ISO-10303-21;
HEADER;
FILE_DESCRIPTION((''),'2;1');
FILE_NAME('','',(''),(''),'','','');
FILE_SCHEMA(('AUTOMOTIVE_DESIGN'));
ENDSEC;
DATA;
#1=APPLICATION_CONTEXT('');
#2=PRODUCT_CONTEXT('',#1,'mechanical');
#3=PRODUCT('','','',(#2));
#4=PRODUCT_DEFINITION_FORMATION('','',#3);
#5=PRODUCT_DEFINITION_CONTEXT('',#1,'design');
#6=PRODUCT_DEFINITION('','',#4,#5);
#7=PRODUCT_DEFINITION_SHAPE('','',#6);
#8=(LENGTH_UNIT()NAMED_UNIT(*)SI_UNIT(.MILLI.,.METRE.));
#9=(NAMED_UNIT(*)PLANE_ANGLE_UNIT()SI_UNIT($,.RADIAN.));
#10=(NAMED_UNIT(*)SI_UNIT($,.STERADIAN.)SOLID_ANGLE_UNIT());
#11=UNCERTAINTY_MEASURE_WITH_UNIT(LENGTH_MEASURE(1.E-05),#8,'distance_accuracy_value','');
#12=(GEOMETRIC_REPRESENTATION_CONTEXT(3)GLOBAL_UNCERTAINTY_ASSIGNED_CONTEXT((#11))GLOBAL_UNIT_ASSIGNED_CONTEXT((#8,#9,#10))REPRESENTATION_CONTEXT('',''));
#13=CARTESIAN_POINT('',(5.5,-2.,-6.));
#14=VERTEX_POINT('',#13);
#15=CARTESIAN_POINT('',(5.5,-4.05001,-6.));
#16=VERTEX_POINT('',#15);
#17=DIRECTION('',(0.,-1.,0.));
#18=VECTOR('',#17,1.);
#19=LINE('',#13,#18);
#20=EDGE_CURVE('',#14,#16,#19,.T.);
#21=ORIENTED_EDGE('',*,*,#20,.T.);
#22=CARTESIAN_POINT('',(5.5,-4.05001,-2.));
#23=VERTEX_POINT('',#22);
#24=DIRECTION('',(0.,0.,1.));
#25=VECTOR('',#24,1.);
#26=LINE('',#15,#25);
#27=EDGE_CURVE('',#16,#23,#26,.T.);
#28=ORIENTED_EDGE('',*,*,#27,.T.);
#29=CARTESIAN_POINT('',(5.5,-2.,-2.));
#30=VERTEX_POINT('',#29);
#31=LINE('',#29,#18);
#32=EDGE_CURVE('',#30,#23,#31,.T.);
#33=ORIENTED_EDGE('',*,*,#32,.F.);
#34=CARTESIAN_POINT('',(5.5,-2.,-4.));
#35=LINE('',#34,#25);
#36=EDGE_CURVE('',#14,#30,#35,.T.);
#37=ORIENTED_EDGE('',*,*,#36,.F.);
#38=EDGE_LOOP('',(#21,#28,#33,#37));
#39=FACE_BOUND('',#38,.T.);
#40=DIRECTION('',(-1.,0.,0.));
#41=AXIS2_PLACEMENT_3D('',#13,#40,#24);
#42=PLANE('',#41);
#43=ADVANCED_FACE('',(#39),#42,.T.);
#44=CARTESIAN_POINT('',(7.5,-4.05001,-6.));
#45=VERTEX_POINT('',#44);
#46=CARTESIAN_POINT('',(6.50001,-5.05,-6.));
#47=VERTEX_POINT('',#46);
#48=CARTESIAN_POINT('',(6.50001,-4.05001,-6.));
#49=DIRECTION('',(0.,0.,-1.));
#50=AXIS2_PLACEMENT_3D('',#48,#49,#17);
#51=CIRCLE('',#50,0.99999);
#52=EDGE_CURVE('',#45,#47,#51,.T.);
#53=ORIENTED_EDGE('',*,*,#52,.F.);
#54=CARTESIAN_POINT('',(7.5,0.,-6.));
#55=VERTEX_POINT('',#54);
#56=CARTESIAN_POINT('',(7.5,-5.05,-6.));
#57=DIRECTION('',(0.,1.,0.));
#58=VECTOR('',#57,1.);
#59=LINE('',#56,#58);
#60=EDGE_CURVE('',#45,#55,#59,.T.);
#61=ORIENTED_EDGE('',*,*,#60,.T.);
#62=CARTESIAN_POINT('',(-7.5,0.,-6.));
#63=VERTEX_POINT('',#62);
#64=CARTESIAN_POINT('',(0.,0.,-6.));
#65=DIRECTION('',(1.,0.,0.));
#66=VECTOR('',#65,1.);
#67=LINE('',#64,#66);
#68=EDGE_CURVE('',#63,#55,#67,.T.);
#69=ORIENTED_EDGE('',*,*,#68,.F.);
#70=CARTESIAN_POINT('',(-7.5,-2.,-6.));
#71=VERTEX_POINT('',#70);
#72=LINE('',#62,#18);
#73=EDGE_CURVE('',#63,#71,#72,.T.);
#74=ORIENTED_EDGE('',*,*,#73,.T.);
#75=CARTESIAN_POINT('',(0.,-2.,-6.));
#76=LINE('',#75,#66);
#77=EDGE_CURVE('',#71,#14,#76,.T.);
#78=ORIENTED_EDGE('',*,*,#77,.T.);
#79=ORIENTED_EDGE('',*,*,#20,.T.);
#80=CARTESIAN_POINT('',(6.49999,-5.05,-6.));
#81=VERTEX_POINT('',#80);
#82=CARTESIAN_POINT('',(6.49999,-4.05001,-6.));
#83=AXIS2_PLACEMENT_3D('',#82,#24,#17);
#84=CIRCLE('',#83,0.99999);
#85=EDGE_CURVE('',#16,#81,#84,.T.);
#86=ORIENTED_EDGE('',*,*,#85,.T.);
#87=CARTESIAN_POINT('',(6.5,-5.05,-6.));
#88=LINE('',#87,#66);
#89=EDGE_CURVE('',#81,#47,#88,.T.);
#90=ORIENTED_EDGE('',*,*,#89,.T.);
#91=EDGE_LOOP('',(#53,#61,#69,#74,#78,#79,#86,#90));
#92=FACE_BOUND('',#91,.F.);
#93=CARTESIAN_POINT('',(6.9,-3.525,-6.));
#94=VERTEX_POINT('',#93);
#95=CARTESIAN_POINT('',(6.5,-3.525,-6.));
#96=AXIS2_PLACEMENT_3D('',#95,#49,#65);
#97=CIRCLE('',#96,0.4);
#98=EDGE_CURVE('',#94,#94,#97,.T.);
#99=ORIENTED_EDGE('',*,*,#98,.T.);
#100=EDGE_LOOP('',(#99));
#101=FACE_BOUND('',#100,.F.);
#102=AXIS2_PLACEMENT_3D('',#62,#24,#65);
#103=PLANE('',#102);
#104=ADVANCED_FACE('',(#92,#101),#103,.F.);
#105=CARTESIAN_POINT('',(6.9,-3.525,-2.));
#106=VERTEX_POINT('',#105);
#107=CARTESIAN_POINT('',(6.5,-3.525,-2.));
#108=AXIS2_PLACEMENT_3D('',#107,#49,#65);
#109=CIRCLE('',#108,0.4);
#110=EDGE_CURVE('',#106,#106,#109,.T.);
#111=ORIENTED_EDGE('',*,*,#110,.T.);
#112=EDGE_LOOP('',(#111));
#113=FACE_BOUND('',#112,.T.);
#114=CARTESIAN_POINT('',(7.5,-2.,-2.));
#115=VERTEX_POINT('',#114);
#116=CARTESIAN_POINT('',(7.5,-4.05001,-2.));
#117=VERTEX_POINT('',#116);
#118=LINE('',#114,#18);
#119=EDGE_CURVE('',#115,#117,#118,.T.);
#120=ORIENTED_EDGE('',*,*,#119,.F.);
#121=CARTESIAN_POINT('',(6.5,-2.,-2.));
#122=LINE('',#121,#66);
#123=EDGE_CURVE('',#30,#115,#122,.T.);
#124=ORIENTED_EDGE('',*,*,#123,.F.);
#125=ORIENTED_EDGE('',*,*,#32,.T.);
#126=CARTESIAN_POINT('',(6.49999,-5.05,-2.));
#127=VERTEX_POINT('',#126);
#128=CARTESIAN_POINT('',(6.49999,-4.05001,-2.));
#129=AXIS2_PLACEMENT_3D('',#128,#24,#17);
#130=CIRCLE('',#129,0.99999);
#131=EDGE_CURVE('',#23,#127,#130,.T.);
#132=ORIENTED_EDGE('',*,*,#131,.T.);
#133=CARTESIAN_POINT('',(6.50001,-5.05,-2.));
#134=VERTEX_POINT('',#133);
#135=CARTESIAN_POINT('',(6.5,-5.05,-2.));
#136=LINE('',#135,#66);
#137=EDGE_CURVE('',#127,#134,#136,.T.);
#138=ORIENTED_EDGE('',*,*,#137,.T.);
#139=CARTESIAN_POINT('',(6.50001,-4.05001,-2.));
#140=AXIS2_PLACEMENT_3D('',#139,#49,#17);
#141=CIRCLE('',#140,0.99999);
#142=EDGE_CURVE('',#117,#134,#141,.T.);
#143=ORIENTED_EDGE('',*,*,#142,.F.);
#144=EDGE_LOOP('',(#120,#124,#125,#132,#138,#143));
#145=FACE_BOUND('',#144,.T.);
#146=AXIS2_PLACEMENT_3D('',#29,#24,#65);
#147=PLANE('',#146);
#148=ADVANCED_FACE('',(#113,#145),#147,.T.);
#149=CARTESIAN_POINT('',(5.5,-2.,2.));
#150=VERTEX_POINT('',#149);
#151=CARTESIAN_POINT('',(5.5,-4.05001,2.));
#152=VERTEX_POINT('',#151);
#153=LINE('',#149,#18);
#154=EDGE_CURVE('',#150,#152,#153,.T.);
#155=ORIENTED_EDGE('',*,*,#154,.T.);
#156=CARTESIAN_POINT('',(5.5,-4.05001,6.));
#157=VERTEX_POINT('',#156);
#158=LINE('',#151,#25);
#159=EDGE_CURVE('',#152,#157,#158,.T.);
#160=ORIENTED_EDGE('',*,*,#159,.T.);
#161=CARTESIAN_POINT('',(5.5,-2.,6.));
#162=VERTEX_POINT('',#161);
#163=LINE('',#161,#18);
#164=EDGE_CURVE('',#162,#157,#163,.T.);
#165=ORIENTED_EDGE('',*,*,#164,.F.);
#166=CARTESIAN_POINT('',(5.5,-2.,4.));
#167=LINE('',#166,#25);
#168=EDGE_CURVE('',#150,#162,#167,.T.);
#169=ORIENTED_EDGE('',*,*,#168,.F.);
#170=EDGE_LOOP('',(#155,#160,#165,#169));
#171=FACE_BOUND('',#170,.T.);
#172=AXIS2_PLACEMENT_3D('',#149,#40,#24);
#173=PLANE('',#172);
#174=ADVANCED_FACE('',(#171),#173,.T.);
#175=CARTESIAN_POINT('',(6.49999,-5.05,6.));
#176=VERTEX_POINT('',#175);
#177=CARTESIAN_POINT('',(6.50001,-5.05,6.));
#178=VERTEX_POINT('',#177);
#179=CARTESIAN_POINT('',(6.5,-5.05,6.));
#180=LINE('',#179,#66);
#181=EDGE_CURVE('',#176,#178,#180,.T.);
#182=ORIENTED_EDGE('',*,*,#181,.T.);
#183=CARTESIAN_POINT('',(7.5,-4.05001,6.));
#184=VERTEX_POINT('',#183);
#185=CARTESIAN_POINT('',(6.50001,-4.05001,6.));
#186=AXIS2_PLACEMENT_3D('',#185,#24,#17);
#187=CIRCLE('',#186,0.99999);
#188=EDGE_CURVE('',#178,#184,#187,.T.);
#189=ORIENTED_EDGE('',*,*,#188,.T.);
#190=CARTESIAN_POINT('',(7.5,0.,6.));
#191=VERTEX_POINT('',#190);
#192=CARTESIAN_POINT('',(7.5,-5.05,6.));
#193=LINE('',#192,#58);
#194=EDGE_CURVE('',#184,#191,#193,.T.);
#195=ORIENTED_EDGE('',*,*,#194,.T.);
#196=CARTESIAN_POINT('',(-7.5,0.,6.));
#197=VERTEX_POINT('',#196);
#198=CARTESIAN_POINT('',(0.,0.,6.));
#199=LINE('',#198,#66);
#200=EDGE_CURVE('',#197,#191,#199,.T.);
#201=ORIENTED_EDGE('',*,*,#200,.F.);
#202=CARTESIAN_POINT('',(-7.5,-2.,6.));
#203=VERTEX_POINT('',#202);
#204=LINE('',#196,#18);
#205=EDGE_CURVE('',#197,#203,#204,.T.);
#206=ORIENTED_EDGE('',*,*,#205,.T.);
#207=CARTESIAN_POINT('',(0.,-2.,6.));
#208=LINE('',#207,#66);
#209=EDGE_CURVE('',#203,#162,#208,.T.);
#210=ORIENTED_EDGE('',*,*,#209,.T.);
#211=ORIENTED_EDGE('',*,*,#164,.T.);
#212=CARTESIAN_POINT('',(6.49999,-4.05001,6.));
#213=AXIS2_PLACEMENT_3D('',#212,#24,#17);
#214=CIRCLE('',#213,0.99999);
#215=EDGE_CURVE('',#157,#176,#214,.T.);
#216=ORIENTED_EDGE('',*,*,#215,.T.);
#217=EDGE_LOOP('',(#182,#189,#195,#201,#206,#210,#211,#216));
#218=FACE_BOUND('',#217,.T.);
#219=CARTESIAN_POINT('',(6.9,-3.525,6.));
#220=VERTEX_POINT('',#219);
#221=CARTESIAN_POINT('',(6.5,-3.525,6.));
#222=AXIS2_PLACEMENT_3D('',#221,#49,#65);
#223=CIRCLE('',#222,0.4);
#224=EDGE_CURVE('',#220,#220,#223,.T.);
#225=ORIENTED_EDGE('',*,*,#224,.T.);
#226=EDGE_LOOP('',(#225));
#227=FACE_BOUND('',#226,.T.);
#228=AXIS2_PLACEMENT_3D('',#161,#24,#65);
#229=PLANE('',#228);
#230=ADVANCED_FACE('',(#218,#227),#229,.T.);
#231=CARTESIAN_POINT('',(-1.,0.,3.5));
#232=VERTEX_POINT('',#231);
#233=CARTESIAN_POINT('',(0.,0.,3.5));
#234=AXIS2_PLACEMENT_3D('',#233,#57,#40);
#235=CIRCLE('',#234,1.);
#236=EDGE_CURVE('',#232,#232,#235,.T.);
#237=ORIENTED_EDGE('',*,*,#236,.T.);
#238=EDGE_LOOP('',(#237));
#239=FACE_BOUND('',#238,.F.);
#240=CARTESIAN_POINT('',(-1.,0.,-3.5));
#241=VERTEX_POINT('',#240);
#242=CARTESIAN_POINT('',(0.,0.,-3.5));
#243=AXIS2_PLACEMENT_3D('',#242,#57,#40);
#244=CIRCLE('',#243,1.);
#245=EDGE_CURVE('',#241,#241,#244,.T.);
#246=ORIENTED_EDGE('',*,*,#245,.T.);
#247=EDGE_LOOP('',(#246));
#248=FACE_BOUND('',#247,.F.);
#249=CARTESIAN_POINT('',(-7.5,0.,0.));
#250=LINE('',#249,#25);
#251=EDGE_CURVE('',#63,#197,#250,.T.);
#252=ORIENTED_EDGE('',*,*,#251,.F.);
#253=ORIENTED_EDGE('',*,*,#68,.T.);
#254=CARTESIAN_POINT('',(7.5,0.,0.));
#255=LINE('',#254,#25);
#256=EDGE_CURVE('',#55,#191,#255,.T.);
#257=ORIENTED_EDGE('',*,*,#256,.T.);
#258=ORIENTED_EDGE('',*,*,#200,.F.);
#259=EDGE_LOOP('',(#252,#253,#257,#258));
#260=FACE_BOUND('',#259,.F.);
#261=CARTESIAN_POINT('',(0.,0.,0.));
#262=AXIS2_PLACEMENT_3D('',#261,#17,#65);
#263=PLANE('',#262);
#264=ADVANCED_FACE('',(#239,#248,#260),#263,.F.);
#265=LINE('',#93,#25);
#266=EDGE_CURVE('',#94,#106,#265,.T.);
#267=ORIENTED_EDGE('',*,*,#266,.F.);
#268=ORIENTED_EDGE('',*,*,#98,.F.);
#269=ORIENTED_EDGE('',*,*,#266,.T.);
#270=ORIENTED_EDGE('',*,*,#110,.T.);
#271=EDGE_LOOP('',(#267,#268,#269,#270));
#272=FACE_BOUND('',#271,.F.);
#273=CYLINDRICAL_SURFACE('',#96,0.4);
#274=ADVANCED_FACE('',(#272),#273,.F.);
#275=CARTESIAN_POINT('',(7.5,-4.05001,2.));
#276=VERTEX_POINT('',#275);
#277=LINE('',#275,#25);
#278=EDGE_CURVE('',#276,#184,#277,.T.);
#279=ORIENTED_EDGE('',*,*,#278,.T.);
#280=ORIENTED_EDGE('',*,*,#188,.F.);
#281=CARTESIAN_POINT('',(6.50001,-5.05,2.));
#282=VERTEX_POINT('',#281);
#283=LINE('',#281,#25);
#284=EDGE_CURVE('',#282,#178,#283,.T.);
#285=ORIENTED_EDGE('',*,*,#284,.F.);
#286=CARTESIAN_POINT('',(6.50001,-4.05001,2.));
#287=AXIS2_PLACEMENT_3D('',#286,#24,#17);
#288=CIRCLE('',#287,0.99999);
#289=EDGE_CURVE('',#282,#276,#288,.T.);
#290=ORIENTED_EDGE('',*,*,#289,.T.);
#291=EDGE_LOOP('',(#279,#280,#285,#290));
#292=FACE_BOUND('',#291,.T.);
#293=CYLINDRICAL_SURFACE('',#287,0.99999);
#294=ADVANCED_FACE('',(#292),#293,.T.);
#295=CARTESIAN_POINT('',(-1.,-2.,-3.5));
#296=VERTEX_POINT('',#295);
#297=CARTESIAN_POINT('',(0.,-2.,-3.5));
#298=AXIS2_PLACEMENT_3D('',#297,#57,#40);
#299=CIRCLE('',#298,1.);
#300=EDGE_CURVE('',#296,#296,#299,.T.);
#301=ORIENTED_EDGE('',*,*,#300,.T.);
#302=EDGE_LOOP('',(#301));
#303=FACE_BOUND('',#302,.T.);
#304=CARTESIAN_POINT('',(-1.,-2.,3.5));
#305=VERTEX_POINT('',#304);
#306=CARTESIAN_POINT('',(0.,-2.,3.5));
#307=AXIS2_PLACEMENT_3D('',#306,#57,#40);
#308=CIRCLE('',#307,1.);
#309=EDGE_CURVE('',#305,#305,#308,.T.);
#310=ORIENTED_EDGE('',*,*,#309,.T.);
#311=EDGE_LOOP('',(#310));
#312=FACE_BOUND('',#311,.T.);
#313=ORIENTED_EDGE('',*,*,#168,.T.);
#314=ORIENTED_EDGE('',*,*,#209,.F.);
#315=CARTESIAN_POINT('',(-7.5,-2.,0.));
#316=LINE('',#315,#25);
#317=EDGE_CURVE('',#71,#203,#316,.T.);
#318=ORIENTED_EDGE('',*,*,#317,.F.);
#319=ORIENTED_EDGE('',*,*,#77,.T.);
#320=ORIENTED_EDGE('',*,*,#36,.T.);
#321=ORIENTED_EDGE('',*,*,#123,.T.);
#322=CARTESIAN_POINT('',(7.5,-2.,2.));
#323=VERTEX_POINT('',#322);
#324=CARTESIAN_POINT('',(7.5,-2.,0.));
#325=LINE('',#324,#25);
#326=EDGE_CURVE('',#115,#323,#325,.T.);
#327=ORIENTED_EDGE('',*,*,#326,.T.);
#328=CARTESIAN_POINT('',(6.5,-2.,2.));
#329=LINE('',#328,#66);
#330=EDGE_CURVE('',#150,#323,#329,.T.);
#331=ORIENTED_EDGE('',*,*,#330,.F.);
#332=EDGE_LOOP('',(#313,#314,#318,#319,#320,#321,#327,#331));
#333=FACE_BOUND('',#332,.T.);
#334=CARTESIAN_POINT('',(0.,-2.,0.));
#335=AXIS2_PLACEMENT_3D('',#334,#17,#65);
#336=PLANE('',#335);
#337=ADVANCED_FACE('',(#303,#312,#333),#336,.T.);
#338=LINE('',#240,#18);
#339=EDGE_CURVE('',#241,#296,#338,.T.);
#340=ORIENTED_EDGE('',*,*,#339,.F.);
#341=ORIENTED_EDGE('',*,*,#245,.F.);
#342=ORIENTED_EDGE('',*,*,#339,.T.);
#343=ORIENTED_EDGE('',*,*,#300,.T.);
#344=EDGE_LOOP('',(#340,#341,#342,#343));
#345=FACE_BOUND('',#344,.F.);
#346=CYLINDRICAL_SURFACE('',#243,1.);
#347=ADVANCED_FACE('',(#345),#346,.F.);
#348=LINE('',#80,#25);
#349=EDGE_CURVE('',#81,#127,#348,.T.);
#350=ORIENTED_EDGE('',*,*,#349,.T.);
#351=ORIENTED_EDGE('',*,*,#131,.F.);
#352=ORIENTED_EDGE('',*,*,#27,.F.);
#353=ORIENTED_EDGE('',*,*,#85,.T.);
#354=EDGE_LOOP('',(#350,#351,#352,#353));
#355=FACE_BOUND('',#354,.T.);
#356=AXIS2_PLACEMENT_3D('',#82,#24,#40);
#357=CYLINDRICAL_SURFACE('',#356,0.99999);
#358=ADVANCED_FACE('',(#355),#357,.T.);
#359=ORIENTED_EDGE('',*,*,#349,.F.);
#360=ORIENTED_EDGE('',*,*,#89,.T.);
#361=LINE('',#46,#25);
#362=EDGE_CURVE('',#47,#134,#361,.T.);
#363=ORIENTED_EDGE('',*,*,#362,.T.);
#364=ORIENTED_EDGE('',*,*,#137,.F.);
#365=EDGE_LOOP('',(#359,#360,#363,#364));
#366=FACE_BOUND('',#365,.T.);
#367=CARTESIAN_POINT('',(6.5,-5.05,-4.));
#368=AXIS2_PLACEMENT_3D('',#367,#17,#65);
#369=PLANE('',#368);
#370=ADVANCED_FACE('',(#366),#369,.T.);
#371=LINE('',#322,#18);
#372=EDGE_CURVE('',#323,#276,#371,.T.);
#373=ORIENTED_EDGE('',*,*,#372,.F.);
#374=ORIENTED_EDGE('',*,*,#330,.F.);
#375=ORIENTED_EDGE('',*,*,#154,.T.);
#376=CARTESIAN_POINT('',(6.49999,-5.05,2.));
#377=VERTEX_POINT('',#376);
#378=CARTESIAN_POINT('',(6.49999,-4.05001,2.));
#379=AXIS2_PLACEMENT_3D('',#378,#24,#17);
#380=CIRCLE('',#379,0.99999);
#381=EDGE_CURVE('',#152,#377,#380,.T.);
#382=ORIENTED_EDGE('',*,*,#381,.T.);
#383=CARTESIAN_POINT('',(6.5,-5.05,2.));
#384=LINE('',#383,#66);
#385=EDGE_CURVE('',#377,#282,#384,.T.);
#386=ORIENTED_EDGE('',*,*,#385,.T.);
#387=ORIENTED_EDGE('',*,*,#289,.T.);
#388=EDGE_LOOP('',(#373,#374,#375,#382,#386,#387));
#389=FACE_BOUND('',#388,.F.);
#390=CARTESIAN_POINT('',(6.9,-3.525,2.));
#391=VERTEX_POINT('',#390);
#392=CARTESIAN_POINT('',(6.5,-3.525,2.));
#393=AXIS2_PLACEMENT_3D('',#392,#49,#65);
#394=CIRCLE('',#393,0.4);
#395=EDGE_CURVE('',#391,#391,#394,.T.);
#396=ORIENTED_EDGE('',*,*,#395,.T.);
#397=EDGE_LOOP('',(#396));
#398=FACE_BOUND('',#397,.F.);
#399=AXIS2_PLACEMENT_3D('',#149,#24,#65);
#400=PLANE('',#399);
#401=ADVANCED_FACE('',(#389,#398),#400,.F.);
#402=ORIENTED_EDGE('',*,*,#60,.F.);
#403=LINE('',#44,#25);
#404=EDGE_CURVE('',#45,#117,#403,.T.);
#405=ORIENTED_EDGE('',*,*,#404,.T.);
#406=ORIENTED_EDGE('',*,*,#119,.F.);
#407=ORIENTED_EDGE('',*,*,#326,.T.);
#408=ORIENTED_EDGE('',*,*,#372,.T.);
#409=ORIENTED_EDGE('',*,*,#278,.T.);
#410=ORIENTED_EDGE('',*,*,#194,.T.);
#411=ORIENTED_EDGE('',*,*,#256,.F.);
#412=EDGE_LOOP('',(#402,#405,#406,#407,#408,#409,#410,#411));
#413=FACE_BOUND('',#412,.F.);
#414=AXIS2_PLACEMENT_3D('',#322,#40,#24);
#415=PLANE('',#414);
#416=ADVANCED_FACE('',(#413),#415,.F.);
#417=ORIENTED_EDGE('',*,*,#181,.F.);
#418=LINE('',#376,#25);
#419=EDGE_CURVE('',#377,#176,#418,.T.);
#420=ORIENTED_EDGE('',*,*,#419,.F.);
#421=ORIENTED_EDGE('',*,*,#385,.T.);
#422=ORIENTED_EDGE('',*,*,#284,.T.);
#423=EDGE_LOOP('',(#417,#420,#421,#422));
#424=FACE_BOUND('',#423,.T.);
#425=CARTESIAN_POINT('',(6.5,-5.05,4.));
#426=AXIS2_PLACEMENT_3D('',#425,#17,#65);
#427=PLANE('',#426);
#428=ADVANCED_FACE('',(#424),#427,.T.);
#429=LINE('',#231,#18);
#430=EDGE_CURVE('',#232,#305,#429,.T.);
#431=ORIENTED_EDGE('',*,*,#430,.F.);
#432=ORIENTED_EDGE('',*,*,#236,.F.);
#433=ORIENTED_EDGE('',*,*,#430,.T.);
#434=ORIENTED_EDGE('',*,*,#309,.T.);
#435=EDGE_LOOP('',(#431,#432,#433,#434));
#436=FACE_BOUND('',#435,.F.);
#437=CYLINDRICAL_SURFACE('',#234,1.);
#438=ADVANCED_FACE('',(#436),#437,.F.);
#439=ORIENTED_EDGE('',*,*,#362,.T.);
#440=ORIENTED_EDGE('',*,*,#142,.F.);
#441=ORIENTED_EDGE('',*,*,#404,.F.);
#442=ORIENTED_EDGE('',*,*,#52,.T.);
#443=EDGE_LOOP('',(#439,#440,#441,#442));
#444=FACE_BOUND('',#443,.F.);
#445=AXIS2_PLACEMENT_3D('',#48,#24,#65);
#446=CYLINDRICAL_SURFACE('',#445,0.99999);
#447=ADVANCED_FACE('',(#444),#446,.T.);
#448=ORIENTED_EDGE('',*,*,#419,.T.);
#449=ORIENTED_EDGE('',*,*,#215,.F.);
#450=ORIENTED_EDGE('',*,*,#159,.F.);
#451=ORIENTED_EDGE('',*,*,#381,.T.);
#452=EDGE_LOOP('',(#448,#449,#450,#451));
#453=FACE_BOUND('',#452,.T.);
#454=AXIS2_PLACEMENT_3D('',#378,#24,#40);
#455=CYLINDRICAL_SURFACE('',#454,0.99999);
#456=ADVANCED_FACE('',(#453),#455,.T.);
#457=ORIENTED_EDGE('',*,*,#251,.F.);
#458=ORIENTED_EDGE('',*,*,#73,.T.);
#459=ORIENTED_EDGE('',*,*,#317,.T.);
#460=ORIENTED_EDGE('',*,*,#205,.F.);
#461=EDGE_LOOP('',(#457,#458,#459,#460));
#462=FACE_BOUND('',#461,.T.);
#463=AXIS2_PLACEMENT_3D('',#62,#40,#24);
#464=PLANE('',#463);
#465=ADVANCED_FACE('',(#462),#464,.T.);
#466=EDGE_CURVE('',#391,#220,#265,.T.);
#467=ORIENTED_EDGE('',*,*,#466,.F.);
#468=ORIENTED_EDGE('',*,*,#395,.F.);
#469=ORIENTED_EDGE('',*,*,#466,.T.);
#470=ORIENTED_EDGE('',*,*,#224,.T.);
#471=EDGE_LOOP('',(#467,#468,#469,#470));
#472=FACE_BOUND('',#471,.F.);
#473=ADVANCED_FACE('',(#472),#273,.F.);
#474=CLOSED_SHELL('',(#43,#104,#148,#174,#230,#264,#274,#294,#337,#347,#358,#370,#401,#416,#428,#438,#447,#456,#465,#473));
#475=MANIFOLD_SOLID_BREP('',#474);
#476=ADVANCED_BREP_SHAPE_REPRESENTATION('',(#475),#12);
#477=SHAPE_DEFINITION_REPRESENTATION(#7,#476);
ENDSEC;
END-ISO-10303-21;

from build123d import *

# Parameters (mm, degrees)
F0_W     = 15
F0_H     = 12
F1_DEPTH = 2
F2_W     = 2
F2_H     = 4
F3_DEPTH = 3.05
F4_R     = 0.4
F5_DEPTH = 25
F6_R     = 0.99999
F7_R     = 1
F8_DEPTH = 25


# Not quite as in the source:
# - a fillet or chamfer is up to 0.001 mm smaller than in the source, because OpenCascade refuses the exact size


with BuildPart() as f1:
    # F0 (on Front) → F1 (new body)
    with BuildSketch(Plane.XZ):
        Rectangle(F0_W, F0_H)
    extrude(amount=F1_DEPTH)

    # F2 (on face) → F3 (join)
    with BuildSketch(Plane.XZ.offset(2)):
        with Locations((6.5, 4)):
            Rectangle(F2_W, F2_H)
        with Locations((6.5, -4)):
            Rectangle(F2_W, F2_H)
    extrude(amount=F3_DEPTH)

    # F4 (on face) → F5 (cut)
    with BuildSketch(Plane(origin=(0, 0, -6), x_dir=(1, 0, 0), z_dir=(0, 0, -1))):
        with Locations((6.5, 3.525)):
            Circle(F4_R)
    extrude(amount=-F5_DEPTH, mode=Mode.SUBTRACT)

    # F6 (radius 1 in the source; OpenCascade refuses exactly that, so slightly less here)
    f6_edges = [f1.edges().sort_by_distance(p)[0] for p in [
        (7.5, -5.05, 4),
        (5.5, -5.05, 4),
        (7.5, -5.05, -4),
        (5.5, -5.05, -4),
    ]]
    fillet(f6_edges, radius=F6_R)

    # F7 (on face) → F8 (cut)
    with BuildSketch(Plane(origin=(0, 0, 0), x_dir=(-1, 0, 0), z_dir=(0, 1, 0))):
        with Locations((0, 3.5)):
            Circle(F7_R)
        with Locations((0, -3.5)):
            Circle(F7_R)
    extrude(amount=-F8_DEPTH, mode=Mode.SUBTRACT)


solid = f1.part
